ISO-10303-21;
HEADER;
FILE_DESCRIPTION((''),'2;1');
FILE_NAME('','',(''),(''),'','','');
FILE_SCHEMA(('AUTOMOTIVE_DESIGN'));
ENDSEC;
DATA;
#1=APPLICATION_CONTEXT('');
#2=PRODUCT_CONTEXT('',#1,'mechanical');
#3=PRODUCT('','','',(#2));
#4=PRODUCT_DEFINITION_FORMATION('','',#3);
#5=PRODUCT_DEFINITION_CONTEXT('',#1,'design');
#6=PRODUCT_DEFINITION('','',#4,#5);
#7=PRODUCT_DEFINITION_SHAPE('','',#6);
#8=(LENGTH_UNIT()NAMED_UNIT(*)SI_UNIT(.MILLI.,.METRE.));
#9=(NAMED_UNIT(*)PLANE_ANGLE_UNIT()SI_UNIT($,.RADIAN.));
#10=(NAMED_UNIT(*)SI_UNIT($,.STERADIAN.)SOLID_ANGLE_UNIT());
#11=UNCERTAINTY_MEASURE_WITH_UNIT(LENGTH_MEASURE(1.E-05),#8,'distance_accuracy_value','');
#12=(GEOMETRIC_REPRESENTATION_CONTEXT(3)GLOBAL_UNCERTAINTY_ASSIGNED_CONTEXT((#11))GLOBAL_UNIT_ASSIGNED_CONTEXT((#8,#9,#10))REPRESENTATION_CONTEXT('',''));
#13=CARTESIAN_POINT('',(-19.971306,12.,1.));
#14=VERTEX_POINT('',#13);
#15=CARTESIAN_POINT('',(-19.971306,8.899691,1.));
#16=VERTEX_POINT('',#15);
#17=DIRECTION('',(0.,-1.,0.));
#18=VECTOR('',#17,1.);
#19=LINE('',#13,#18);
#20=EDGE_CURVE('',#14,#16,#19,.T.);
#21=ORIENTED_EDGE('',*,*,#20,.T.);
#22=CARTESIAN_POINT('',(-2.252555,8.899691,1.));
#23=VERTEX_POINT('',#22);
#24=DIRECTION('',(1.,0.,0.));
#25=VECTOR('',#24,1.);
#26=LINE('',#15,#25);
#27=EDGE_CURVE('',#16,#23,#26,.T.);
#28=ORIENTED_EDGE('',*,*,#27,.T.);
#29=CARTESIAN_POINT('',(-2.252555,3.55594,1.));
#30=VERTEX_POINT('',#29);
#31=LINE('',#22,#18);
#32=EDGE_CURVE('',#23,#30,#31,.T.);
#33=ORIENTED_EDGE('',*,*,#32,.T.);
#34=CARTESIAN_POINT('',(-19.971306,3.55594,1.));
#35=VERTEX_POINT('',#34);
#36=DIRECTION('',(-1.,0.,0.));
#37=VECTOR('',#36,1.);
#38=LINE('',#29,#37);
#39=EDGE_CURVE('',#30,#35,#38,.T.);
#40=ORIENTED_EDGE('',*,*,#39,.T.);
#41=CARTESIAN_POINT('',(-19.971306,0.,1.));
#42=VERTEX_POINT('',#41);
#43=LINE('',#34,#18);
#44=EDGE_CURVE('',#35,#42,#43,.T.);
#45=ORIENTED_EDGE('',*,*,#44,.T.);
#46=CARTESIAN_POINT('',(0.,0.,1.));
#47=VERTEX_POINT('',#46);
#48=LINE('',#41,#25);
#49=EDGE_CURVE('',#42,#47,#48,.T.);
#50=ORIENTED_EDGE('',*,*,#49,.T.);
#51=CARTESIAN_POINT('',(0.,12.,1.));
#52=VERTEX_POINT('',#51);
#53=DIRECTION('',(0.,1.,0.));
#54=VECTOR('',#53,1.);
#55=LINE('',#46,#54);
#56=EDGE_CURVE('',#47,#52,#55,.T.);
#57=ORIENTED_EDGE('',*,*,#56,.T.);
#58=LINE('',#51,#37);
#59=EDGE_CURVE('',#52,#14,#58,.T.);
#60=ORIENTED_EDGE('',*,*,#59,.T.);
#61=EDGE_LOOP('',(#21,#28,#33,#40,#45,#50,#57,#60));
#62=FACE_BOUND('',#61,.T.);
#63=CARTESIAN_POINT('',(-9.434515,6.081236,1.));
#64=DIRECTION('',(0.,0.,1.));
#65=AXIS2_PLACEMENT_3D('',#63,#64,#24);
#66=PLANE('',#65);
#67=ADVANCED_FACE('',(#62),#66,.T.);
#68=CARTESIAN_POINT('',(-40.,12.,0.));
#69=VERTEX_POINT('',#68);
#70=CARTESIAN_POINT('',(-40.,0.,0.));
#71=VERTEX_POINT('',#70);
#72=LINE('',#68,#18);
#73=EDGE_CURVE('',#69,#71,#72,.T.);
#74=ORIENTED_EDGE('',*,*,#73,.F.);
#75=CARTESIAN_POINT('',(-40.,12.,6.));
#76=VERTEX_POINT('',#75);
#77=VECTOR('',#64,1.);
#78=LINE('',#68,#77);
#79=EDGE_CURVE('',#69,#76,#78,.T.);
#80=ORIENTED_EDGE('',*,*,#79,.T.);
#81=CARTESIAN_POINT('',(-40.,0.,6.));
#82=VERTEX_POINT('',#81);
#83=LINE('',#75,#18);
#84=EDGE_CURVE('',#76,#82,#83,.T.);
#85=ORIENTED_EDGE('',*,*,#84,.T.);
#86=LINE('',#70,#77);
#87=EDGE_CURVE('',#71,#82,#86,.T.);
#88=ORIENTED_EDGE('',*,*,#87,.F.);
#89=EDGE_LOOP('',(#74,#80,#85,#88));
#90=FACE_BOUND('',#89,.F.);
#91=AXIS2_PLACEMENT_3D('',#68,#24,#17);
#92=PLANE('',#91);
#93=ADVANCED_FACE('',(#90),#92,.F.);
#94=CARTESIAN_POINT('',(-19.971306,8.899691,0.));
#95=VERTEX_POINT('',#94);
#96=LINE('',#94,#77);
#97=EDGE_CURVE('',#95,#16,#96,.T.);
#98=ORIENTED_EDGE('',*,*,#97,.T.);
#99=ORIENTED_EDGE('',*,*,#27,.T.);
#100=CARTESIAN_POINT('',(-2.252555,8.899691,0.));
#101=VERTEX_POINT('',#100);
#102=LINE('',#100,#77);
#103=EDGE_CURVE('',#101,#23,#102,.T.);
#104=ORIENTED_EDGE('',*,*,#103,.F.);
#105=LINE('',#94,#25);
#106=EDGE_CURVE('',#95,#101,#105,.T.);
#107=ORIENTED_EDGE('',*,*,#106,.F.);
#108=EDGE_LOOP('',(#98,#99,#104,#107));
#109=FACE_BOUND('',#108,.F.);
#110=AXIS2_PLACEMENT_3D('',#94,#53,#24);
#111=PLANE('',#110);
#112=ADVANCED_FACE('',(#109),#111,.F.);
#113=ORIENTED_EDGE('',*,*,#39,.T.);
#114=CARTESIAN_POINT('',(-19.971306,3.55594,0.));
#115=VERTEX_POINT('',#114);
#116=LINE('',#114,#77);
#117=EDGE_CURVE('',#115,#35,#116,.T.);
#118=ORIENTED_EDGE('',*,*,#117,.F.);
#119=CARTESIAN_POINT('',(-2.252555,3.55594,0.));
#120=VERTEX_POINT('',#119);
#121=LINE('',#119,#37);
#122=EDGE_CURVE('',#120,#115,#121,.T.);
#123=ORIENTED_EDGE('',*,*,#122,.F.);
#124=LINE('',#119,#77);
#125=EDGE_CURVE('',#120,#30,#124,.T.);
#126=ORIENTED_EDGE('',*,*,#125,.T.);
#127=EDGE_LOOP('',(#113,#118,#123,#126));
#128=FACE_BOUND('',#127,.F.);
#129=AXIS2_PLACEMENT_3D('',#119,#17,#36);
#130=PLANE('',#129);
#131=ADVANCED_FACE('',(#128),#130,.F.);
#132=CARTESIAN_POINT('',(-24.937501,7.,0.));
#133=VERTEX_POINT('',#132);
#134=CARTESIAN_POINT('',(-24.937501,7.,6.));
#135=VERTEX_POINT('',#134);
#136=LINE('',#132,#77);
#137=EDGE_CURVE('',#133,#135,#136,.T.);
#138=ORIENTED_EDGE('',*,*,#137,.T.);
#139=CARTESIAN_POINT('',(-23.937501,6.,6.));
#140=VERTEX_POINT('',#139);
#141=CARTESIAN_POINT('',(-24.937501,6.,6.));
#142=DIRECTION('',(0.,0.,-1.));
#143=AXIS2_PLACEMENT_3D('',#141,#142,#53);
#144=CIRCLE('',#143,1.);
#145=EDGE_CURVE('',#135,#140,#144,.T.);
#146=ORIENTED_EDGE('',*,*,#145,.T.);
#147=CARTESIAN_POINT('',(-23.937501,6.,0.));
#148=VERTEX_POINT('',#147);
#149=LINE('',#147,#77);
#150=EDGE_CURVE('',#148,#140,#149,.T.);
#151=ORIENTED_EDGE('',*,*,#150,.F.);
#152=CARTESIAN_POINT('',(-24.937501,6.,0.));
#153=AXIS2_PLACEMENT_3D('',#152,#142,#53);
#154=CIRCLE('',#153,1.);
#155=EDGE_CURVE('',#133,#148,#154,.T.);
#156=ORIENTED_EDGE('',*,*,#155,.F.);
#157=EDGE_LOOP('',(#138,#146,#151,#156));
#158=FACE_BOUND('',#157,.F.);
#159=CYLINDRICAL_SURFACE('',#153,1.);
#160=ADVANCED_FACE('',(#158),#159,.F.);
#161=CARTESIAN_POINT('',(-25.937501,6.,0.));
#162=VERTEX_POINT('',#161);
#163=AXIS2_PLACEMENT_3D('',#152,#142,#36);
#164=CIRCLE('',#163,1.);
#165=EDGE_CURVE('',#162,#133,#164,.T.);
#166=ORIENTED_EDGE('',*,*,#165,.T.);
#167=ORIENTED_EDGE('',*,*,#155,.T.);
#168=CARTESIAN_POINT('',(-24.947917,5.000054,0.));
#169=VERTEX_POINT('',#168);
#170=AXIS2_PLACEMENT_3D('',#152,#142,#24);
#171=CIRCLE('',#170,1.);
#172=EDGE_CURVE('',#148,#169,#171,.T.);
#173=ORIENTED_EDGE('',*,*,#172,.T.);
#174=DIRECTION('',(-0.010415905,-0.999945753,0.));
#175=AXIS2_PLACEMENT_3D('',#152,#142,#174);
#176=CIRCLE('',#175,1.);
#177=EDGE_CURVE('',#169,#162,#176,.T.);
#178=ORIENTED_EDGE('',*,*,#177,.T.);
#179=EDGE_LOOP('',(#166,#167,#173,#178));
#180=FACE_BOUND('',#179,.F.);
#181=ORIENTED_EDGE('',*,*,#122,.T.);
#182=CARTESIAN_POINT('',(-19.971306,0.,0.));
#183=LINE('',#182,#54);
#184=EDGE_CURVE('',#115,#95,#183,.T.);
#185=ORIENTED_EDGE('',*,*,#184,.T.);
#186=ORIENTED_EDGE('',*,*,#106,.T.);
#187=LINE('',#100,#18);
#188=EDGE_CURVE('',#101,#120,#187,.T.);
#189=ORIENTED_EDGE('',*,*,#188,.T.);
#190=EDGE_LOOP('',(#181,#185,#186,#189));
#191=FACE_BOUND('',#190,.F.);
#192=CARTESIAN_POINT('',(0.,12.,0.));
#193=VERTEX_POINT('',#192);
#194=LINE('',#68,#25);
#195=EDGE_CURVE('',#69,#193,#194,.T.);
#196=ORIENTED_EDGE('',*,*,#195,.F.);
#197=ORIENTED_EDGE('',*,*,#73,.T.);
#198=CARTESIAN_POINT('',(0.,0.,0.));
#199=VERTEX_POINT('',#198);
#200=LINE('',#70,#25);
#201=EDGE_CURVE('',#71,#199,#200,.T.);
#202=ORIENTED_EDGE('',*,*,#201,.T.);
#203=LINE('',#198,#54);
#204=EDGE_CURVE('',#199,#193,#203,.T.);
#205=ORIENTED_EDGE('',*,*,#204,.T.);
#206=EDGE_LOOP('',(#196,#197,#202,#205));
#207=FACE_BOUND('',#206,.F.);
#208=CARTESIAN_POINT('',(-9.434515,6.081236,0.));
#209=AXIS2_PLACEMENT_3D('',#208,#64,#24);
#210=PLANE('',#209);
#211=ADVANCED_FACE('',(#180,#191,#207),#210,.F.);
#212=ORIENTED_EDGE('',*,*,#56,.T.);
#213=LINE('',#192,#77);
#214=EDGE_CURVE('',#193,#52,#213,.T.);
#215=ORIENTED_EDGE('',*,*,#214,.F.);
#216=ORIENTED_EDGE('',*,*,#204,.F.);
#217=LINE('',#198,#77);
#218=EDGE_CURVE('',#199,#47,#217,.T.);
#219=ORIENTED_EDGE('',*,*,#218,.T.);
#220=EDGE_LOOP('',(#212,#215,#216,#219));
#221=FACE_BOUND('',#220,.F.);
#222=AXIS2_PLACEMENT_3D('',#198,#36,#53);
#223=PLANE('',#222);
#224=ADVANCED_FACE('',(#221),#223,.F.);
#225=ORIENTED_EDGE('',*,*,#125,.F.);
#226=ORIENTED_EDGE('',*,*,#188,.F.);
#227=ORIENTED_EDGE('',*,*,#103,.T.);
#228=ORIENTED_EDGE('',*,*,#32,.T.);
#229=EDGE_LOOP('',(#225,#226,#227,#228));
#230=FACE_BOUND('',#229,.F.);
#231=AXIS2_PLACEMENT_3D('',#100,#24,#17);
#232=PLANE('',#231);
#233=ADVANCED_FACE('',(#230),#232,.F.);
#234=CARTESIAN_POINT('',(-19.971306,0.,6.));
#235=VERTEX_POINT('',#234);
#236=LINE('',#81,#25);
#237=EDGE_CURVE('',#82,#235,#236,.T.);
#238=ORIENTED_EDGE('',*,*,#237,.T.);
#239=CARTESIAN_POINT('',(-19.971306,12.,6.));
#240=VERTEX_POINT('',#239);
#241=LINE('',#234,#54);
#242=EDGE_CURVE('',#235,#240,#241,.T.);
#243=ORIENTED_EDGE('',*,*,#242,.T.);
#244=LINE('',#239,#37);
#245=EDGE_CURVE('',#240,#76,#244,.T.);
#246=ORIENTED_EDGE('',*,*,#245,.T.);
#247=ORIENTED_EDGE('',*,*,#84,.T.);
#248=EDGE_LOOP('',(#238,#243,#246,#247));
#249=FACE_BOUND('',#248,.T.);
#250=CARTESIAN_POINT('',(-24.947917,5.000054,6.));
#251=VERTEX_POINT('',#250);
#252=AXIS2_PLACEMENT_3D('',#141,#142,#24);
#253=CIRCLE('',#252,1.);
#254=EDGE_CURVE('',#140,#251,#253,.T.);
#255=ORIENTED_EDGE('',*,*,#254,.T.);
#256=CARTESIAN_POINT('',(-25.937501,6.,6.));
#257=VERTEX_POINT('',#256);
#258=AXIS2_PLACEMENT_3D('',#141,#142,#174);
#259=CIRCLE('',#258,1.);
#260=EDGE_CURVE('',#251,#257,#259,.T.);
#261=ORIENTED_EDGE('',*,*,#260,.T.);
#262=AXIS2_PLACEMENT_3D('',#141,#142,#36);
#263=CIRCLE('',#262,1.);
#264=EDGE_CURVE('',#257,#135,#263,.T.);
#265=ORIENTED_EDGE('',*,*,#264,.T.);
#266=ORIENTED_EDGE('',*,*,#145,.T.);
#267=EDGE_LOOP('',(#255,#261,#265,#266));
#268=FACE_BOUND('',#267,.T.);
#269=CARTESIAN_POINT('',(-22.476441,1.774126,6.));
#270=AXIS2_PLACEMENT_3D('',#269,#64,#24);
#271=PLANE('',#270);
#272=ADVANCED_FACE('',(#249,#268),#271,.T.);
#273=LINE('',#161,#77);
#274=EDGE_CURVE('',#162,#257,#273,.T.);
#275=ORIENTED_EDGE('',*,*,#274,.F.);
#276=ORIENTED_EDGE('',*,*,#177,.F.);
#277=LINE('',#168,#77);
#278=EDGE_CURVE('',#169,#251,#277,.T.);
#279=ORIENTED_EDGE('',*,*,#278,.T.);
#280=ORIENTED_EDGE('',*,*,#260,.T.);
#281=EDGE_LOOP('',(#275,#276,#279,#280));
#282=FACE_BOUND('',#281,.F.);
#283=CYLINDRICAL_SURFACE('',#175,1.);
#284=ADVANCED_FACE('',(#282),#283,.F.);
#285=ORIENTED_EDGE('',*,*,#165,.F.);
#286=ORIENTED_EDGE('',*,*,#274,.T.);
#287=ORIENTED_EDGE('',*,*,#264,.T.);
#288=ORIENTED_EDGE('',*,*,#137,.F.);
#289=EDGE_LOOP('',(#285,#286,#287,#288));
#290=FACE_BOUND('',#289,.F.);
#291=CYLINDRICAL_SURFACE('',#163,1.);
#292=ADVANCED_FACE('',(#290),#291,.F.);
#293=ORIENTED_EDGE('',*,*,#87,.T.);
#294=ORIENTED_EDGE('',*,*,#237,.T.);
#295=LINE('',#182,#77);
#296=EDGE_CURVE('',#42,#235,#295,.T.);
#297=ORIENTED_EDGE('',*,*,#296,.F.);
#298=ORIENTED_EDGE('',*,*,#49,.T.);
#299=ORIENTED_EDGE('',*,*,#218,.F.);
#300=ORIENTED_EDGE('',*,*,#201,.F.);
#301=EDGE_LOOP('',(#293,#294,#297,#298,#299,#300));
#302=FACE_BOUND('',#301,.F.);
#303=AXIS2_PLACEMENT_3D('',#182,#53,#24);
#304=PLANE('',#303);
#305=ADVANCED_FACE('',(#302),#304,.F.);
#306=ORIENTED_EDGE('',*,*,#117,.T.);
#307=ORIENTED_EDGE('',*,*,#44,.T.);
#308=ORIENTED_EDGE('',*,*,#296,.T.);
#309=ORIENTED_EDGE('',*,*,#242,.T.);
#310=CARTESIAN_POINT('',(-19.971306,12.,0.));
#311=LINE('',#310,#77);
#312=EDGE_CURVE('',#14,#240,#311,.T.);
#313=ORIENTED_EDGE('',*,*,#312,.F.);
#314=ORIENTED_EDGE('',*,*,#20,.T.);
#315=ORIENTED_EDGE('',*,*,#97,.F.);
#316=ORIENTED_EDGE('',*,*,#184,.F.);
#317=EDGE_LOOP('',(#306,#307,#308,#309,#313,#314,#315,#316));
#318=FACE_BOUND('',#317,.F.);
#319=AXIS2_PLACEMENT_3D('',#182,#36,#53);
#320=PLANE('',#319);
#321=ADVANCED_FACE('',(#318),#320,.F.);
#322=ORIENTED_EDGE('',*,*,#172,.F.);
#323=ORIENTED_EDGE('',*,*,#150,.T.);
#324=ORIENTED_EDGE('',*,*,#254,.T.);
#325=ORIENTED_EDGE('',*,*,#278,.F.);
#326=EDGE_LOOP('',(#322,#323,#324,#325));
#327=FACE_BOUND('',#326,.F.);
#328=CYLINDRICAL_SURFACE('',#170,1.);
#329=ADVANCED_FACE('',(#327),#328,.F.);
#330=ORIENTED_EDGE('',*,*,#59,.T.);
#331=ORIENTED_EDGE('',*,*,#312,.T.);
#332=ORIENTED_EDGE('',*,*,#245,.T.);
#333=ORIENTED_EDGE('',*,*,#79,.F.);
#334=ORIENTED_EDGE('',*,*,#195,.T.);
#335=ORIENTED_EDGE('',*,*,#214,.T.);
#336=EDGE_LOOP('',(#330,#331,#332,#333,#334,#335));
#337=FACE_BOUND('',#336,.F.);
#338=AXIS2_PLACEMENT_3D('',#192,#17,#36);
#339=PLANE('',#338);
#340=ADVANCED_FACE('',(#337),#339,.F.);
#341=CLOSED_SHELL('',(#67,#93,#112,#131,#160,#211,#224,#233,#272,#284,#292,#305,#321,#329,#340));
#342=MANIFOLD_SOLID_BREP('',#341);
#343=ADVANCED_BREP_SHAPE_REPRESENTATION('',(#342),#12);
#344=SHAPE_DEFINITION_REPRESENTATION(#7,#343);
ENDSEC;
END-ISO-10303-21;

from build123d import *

# Parameters (mm, degrees)
F1_DEPTH = 6
F2_DEPTH = 1


with BuildPart() as f1:
    # F0 (on Top) → F1 (new body)
    with BuildSketch(Plane.XY):
        Polygon((-25, 0), (-19.9713055044, 0), (-19.9713055044, 3.5559397656), (-24.9629596584, 3.5559397656), align=None)
        Polygon((-40, 0), (-25, 0), (-24.9629596584, 3.5559397656), (-40, 3.5559397656), align=None)
        with BuildLine():
            Line((-24.9629596584, 3.5559397656), (-19.9713055044, 3.5559397656))
            Line((-19.9713055044, 3.5559397656), (-19.9713055044, 6))
            Line((-19.9713055044, 6), (-23.9375011772, 6))
            ThreePointArc((-23.9375011772, 6), (-24.2340866143, 5.2892201799), (-24.9479170826, 5.000054247))
            Line((-24.9479170826, 5.000054247), (-24.9629596584, 3.5559397656))
        make_face()
        with BuildLine():
            Line((-19.9713055044, 8.8996905833), (-19.9713055044, 12))
            Line((-19.9713055044, 12), (-24.9375011772, 12))
            Line((-24.9375011772, 12), (-24.9375011772, 7))
            ThreePointArc((-24.9375011772, 7), (-24.230394396, 6.7071067812), (-23.9375011772, 6))
            Line((-23.9375011772, 6), (-19.9713055044, 6))
            Line((-19.9713055044, 6), (-19.9713055044, 8.8996905833))
        make_face()
        with BuildLine():
            Line((-40, 3.5559397656), (-24.9629596584, 3.5559397656))
            Line((-24.9629596584, 3.5559397656), (-24.9479170826, 5.000054247))
            ThreePointArc((-24.9479170826, 5.000054247), (-25.6482809973, 5.2965854371), (-25.9375011772, 6))
            Line((-25.9375011772, 6), (-40, 6))
            Line((-40, 6), (-40, 3.5559397656))
        make_face()
        with BuildLine():
            Line((-24.9375011772, 7), (-24.9375011772, 12))
            Line((-24.9375011772, 12), (-40, 12))
            Line((-40, 12), (-40, 6))
            Line((-40, 6), (-25.9375011772, 6))
            ThreePointArc((-25.9375011772, 6), (-25.6446079584, 6.7071067812), (-24.9375011772, 7))
        make_face()
    extrude(amount=F1_DEPTH)

    # F0 (on Top) → F2 (join)
    with BuildSketch(Plane.XY):
        Polygon((-19.9713055044, 0), (0, 0), (0, 12), (-19.9713055044, 12), (-19.9713055044, 8.8996905833), (-2.2525554523, 8.8996905833), (-2.2525554523, 3.5559397656), (-19.9713055044, 3.5559397656), align=None)
    extrude(amount=F2_DEPTH)


solid = f1.part
